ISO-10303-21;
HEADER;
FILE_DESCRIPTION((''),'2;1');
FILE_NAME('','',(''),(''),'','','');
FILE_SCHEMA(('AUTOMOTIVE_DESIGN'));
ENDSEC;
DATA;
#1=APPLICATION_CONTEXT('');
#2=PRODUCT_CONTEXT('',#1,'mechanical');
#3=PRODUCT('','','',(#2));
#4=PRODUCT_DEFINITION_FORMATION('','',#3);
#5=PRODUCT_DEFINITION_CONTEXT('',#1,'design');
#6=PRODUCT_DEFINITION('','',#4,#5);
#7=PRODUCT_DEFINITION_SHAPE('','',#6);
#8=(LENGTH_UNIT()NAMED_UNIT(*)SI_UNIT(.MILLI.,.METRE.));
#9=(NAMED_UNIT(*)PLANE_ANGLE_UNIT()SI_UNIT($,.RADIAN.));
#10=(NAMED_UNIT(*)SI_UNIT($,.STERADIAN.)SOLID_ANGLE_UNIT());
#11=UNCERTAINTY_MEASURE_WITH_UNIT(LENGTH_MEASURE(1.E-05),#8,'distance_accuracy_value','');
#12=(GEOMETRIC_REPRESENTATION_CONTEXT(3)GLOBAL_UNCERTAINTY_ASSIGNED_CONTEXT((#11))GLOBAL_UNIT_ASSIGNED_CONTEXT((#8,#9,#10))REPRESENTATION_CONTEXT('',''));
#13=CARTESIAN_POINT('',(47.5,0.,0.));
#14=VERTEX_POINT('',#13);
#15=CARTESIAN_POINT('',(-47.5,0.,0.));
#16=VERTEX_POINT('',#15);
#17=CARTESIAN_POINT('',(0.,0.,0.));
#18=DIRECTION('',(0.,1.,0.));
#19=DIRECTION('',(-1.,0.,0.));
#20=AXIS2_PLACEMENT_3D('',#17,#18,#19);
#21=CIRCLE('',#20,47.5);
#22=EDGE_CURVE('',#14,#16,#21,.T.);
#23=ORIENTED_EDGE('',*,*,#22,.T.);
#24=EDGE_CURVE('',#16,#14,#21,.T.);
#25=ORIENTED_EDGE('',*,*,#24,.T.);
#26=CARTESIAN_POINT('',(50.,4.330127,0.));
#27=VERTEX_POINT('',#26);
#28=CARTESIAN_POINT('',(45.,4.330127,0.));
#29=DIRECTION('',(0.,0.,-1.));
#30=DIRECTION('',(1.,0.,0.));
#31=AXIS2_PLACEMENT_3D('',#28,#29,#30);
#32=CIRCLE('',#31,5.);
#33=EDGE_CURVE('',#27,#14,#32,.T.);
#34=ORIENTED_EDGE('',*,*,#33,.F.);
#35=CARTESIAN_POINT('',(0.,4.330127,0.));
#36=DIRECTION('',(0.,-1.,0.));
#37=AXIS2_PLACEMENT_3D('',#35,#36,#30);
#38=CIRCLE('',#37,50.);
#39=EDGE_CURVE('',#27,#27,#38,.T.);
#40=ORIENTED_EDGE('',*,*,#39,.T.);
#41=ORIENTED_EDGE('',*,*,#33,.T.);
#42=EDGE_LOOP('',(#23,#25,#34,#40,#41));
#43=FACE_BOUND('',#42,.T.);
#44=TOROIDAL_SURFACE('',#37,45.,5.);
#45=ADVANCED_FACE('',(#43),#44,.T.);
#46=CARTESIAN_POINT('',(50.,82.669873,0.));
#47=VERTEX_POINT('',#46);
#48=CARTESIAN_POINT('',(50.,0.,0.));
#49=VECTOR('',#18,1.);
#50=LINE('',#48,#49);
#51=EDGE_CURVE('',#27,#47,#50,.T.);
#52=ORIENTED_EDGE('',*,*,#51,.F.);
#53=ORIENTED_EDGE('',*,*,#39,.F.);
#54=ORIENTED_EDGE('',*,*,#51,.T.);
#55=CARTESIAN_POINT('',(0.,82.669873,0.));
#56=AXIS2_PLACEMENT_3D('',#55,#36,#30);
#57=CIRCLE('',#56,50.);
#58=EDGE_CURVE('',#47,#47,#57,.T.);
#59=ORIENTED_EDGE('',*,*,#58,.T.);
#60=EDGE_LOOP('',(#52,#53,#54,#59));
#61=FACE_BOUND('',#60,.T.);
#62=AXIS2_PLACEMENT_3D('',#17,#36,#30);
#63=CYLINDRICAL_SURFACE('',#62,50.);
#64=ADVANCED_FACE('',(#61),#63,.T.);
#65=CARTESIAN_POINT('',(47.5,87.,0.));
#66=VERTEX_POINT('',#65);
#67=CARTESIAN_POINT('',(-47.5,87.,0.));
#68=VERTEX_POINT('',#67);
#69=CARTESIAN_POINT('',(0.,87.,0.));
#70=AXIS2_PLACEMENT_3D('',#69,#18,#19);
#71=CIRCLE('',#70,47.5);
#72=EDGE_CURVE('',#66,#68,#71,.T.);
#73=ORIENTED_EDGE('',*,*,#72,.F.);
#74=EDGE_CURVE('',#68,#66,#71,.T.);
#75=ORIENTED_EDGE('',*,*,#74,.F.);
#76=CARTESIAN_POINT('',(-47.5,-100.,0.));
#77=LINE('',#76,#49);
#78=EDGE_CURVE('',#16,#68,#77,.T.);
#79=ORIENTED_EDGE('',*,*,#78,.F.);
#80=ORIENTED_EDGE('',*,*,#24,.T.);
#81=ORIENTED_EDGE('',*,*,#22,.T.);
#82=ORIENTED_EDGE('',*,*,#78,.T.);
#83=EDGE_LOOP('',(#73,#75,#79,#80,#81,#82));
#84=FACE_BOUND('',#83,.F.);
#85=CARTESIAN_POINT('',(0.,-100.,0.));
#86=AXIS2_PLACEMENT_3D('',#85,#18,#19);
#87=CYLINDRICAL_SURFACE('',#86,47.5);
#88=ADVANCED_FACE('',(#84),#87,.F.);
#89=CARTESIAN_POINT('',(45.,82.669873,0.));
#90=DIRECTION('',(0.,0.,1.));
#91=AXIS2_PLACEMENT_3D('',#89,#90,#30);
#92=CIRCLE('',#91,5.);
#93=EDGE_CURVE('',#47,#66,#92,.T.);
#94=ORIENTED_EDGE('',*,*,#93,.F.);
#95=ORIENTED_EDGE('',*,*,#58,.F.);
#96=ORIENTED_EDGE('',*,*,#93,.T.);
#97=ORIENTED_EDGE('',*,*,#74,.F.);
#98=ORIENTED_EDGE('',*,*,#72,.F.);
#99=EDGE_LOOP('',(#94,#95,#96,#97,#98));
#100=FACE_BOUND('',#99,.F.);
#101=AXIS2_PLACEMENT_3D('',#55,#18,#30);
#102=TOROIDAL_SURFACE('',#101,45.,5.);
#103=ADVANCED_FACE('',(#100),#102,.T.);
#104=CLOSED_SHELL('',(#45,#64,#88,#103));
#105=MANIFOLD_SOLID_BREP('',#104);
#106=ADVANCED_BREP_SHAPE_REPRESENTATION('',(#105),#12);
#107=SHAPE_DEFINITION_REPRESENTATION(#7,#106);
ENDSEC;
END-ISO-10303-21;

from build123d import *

# Parameters (mm, degrees)
F0_R     = 50
F1_DEPTH = 87
F3_D     = 95
F3_DEPTH = 100
F3_TIP   = 28.5408794038


# Not quite as in the source:
# - a fillet or chamfer that OpenCascade refuses, or shapes differently, is made with other operations: its cross-section is extruded or revolved along the edge and cut away or added


with BuildPart() as f1:
    # F0 (on Front) → F1 (new body)
    with BuildSketch(Plane.XZ):
        Circle(F0_R)
    extrude(amount=-F1_DEPTH)

    # F3
    with Locations(Plane.XZ):
        with Locations((0, 0)):
            Hole(F3_D / 2, depth=F3_DEPTH)
            with Locations((0, 0, -(F3_DEPTH + F3_TIP / 2))):  # 118° drill point
                Cone(0, F3_D / 2, F3_TIP, mode=Mode.SUBTRACT)

    # F4: fillet of radius 5 on 2 edges, made by hand

    # F4_s1 → F4_t2 (revolve, cut)
    with BuildSketch(Plane.XY):
        with BuildLine():
            ThreePointArc((50, 4.3301270189), (49.3301270189, 1.8301270189), (47.5, 0))
            Line((47.5, 0), (50, 0))
            Line((50, 0), (50, 4.3301270189))
        make_face()
    revolve(axis=Axis((0, 0, 0), (0, -1, 0)), mode=Mode.SUBTRACT)

    # F4_s3 → F4_t4 (revolve, cut)
    with BuildSketch(Plane.XY):
        with BuildLine():
            ThreePointArc((50, 82.6698729811), (49.3301270189, 85.1698729811), (47.5, 87))
            Line((47.5, 87), (50, 87))
            Line((50, 87), (50, 82.6698729811))
        make_face()
    revolve(axis=Axis((0, 87, 0), (0, -1, 0)), mode=Mode.SUBTRACT)


solid = f1.part
